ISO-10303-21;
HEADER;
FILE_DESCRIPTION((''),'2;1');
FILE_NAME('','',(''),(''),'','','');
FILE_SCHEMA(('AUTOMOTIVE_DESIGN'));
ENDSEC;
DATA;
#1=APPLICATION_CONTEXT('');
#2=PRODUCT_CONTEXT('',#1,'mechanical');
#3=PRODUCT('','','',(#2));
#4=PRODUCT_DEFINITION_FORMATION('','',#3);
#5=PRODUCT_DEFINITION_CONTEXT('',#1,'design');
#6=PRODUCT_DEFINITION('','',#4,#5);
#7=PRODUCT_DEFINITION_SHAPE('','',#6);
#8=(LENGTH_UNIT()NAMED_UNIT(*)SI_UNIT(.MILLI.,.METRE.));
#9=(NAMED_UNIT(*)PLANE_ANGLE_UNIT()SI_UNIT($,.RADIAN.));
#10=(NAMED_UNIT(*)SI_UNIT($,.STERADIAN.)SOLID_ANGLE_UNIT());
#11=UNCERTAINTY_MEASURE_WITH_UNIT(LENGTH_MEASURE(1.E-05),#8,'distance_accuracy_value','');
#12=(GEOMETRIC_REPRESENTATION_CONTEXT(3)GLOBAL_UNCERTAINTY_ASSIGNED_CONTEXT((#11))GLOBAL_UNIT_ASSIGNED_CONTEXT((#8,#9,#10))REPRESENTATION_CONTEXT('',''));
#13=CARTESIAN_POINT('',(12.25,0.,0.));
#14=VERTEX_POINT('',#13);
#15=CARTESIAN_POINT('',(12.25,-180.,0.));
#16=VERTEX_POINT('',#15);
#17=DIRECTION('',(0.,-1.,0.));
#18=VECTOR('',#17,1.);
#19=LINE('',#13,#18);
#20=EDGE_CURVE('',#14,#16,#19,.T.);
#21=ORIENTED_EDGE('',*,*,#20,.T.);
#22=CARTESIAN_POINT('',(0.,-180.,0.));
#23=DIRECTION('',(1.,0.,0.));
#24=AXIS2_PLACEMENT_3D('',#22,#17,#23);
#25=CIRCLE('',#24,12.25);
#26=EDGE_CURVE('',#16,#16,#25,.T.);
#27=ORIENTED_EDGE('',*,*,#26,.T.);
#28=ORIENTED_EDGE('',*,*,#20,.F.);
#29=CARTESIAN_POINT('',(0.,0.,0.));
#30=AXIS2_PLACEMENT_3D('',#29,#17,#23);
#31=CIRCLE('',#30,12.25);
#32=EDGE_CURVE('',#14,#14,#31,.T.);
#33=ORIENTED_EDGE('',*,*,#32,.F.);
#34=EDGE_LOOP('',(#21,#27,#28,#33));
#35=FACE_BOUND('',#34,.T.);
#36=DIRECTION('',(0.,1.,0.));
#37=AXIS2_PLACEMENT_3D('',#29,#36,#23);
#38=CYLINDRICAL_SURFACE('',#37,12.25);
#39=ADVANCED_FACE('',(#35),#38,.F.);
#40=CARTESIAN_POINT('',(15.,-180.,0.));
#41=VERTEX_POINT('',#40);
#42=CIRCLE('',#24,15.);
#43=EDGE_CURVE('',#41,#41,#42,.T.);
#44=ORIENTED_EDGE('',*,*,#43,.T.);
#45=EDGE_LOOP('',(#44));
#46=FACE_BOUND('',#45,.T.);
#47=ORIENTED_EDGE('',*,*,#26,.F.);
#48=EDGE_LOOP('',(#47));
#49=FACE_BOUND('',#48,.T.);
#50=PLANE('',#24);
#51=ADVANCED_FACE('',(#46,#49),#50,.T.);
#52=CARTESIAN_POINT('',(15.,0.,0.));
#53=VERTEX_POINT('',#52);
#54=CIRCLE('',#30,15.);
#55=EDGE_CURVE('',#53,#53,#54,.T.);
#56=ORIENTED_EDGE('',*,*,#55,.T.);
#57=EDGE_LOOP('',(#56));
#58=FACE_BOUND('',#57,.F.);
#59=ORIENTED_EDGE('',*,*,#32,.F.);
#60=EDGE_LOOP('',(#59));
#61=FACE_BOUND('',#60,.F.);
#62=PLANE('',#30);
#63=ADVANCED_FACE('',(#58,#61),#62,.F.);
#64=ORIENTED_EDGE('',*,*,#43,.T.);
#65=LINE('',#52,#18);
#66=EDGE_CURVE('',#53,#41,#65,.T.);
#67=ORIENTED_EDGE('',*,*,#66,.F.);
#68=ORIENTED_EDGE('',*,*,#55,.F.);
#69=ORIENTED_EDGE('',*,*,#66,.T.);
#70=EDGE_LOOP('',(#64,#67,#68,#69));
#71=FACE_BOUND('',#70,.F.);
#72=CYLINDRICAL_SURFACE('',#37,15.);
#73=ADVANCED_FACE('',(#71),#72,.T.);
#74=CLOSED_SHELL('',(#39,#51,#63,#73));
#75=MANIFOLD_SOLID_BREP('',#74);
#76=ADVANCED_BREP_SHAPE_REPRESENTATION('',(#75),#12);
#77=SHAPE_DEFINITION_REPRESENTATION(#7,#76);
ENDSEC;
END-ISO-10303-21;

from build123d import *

# Parameters (mm, degrees)
F0_R     = 15
F1_DEPTH = 180
F2_R     = 12.25
F3_DEPTH = 180
F4_R     = 12.25
F5_DEPTH = 180


# Not quite as in the source:
# - the program builds the solid bodies; features that only make, move or delete a surface that nothing else refers to are left out


with BuildPart() as f1:
    # F0 (on Front) → F1 (new body)
    with BuildSketch(Plane.XZ):
        Circle(F0_R)
    extrude(amount=F1_DEPTH)

    # F2 (on Front) → F3 (cut)
    with BuildSketch(Plane.XZ):
        Circle(F2_R)
    extrude(amount=-F3_DEPTH, mode=Mode.SUBTRACT)

    # F4 (on Front) → F5 (cut)
    with BuildSketch(Plane.XZ):
        Circle(F4_R)
    extrude(amount=F5_DEPTH, mode=Mode.SUBTRACT)


solid = f1.part
